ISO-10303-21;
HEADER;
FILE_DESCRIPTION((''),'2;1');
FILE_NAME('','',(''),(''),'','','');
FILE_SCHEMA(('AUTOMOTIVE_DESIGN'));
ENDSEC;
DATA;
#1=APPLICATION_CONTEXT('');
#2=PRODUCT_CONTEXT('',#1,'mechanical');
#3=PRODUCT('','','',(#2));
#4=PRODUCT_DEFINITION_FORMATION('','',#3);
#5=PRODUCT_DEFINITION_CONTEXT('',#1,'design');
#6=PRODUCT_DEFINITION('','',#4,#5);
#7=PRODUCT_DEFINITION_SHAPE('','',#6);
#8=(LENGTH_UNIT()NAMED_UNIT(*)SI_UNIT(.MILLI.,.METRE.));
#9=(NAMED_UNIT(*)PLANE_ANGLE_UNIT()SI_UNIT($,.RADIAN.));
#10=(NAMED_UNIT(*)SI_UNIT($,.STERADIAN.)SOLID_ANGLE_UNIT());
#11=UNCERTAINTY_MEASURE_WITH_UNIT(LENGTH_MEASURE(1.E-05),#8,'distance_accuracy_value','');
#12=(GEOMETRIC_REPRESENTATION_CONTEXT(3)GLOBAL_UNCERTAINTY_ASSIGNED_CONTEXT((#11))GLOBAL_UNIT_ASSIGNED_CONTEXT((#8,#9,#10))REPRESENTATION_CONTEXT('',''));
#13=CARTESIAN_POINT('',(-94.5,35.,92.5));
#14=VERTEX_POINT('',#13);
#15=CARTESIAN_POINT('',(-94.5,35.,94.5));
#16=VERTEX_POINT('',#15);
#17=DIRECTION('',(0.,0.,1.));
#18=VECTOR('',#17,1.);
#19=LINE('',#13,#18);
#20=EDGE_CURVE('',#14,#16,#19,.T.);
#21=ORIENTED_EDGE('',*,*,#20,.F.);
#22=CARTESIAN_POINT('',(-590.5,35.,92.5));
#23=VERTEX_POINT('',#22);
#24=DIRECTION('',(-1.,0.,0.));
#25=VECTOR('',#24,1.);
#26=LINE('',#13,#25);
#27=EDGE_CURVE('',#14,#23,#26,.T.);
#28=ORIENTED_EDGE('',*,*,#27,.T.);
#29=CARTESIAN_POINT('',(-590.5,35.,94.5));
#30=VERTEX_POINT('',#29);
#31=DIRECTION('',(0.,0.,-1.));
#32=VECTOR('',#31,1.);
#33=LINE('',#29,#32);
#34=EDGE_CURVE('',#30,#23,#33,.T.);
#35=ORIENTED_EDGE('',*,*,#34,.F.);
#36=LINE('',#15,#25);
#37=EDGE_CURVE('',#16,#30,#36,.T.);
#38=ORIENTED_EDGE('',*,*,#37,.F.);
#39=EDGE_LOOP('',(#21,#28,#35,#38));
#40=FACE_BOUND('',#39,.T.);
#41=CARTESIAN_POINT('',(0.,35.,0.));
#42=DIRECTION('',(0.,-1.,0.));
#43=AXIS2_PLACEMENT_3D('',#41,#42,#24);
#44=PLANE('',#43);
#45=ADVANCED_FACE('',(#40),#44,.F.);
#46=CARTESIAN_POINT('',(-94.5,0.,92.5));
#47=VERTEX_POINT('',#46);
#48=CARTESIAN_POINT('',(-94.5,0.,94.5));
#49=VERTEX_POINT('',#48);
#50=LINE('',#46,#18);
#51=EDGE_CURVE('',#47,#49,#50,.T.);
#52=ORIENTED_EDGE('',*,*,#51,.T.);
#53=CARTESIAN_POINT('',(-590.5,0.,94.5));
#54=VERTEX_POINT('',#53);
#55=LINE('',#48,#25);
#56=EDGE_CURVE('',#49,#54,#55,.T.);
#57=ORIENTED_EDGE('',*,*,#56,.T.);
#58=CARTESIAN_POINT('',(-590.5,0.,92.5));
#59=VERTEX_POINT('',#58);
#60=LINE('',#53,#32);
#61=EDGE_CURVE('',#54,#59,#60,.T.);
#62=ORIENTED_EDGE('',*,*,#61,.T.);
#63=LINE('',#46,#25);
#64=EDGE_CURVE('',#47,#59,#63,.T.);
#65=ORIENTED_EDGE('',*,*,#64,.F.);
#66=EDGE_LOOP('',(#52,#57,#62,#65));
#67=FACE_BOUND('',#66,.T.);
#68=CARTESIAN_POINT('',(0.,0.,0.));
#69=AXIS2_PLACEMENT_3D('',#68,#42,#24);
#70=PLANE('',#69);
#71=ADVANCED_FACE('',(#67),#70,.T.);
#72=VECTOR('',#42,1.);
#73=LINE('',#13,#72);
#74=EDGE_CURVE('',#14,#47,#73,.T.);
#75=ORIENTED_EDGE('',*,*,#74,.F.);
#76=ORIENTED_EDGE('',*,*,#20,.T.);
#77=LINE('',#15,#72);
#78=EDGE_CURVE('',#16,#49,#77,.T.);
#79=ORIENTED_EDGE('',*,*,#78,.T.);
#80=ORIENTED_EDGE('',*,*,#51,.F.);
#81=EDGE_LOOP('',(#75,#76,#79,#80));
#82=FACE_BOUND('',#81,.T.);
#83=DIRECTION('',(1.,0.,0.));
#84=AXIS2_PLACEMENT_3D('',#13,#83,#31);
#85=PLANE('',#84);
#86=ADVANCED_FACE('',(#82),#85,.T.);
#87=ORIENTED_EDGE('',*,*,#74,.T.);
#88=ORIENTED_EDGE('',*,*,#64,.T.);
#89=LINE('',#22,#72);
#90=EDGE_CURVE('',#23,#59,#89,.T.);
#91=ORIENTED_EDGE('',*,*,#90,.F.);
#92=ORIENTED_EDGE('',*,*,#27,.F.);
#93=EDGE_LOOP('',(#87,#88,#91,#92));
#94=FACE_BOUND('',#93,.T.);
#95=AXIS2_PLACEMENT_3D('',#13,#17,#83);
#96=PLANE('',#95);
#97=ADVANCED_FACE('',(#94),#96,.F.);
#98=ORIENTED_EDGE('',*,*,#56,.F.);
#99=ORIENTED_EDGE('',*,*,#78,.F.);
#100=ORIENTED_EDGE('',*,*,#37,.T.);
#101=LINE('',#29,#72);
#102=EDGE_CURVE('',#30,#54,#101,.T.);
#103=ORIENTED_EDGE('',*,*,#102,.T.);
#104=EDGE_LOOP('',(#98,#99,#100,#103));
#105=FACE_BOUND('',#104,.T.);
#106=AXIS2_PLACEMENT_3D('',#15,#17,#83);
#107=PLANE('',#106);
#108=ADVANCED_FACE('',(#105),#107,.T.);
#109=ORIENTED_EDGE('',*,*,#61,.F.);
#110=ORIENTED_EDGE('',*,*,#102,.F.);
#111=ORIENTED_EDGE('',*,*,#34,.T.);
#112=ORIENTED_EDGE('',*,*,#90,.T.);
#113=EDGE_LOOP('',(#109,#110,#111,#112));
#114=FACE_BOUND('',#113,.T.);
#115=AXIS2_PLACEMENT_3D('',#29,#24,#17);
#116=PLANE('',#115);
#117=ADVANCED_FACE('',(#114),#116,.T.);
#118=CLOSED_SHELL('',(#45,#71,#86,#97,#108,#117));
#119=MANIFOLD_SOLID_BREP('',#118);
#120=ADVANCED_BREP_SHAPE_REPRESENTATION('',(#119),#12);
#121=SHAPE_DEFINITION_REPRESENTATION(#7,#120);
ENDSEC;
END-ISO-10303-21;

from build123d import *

# Parameters (mm, degrees)
SKETCH_1_W             = 496
SKETCH_1_H             = 2
SM_BASE_FLANGE_1_DEPTH = 35


# Sheet-metal steps are written as plain solids
with BuildPart() as part:
    # Sketch 1 → 基体-法兰1 (new body)
    with BuildSketch(Plane(origin=(0, 0, 0), x_dir=(1, 0, 0), z_dir=(0, 1, 0))):
        with Locations((-342.5, -93.5)):
            Rectangle(SKETCH_1_W, SKETCH_1_H)
    extrude(amount=SM_BASE_FLANGE_1_DEPTH)


solid = part.part
